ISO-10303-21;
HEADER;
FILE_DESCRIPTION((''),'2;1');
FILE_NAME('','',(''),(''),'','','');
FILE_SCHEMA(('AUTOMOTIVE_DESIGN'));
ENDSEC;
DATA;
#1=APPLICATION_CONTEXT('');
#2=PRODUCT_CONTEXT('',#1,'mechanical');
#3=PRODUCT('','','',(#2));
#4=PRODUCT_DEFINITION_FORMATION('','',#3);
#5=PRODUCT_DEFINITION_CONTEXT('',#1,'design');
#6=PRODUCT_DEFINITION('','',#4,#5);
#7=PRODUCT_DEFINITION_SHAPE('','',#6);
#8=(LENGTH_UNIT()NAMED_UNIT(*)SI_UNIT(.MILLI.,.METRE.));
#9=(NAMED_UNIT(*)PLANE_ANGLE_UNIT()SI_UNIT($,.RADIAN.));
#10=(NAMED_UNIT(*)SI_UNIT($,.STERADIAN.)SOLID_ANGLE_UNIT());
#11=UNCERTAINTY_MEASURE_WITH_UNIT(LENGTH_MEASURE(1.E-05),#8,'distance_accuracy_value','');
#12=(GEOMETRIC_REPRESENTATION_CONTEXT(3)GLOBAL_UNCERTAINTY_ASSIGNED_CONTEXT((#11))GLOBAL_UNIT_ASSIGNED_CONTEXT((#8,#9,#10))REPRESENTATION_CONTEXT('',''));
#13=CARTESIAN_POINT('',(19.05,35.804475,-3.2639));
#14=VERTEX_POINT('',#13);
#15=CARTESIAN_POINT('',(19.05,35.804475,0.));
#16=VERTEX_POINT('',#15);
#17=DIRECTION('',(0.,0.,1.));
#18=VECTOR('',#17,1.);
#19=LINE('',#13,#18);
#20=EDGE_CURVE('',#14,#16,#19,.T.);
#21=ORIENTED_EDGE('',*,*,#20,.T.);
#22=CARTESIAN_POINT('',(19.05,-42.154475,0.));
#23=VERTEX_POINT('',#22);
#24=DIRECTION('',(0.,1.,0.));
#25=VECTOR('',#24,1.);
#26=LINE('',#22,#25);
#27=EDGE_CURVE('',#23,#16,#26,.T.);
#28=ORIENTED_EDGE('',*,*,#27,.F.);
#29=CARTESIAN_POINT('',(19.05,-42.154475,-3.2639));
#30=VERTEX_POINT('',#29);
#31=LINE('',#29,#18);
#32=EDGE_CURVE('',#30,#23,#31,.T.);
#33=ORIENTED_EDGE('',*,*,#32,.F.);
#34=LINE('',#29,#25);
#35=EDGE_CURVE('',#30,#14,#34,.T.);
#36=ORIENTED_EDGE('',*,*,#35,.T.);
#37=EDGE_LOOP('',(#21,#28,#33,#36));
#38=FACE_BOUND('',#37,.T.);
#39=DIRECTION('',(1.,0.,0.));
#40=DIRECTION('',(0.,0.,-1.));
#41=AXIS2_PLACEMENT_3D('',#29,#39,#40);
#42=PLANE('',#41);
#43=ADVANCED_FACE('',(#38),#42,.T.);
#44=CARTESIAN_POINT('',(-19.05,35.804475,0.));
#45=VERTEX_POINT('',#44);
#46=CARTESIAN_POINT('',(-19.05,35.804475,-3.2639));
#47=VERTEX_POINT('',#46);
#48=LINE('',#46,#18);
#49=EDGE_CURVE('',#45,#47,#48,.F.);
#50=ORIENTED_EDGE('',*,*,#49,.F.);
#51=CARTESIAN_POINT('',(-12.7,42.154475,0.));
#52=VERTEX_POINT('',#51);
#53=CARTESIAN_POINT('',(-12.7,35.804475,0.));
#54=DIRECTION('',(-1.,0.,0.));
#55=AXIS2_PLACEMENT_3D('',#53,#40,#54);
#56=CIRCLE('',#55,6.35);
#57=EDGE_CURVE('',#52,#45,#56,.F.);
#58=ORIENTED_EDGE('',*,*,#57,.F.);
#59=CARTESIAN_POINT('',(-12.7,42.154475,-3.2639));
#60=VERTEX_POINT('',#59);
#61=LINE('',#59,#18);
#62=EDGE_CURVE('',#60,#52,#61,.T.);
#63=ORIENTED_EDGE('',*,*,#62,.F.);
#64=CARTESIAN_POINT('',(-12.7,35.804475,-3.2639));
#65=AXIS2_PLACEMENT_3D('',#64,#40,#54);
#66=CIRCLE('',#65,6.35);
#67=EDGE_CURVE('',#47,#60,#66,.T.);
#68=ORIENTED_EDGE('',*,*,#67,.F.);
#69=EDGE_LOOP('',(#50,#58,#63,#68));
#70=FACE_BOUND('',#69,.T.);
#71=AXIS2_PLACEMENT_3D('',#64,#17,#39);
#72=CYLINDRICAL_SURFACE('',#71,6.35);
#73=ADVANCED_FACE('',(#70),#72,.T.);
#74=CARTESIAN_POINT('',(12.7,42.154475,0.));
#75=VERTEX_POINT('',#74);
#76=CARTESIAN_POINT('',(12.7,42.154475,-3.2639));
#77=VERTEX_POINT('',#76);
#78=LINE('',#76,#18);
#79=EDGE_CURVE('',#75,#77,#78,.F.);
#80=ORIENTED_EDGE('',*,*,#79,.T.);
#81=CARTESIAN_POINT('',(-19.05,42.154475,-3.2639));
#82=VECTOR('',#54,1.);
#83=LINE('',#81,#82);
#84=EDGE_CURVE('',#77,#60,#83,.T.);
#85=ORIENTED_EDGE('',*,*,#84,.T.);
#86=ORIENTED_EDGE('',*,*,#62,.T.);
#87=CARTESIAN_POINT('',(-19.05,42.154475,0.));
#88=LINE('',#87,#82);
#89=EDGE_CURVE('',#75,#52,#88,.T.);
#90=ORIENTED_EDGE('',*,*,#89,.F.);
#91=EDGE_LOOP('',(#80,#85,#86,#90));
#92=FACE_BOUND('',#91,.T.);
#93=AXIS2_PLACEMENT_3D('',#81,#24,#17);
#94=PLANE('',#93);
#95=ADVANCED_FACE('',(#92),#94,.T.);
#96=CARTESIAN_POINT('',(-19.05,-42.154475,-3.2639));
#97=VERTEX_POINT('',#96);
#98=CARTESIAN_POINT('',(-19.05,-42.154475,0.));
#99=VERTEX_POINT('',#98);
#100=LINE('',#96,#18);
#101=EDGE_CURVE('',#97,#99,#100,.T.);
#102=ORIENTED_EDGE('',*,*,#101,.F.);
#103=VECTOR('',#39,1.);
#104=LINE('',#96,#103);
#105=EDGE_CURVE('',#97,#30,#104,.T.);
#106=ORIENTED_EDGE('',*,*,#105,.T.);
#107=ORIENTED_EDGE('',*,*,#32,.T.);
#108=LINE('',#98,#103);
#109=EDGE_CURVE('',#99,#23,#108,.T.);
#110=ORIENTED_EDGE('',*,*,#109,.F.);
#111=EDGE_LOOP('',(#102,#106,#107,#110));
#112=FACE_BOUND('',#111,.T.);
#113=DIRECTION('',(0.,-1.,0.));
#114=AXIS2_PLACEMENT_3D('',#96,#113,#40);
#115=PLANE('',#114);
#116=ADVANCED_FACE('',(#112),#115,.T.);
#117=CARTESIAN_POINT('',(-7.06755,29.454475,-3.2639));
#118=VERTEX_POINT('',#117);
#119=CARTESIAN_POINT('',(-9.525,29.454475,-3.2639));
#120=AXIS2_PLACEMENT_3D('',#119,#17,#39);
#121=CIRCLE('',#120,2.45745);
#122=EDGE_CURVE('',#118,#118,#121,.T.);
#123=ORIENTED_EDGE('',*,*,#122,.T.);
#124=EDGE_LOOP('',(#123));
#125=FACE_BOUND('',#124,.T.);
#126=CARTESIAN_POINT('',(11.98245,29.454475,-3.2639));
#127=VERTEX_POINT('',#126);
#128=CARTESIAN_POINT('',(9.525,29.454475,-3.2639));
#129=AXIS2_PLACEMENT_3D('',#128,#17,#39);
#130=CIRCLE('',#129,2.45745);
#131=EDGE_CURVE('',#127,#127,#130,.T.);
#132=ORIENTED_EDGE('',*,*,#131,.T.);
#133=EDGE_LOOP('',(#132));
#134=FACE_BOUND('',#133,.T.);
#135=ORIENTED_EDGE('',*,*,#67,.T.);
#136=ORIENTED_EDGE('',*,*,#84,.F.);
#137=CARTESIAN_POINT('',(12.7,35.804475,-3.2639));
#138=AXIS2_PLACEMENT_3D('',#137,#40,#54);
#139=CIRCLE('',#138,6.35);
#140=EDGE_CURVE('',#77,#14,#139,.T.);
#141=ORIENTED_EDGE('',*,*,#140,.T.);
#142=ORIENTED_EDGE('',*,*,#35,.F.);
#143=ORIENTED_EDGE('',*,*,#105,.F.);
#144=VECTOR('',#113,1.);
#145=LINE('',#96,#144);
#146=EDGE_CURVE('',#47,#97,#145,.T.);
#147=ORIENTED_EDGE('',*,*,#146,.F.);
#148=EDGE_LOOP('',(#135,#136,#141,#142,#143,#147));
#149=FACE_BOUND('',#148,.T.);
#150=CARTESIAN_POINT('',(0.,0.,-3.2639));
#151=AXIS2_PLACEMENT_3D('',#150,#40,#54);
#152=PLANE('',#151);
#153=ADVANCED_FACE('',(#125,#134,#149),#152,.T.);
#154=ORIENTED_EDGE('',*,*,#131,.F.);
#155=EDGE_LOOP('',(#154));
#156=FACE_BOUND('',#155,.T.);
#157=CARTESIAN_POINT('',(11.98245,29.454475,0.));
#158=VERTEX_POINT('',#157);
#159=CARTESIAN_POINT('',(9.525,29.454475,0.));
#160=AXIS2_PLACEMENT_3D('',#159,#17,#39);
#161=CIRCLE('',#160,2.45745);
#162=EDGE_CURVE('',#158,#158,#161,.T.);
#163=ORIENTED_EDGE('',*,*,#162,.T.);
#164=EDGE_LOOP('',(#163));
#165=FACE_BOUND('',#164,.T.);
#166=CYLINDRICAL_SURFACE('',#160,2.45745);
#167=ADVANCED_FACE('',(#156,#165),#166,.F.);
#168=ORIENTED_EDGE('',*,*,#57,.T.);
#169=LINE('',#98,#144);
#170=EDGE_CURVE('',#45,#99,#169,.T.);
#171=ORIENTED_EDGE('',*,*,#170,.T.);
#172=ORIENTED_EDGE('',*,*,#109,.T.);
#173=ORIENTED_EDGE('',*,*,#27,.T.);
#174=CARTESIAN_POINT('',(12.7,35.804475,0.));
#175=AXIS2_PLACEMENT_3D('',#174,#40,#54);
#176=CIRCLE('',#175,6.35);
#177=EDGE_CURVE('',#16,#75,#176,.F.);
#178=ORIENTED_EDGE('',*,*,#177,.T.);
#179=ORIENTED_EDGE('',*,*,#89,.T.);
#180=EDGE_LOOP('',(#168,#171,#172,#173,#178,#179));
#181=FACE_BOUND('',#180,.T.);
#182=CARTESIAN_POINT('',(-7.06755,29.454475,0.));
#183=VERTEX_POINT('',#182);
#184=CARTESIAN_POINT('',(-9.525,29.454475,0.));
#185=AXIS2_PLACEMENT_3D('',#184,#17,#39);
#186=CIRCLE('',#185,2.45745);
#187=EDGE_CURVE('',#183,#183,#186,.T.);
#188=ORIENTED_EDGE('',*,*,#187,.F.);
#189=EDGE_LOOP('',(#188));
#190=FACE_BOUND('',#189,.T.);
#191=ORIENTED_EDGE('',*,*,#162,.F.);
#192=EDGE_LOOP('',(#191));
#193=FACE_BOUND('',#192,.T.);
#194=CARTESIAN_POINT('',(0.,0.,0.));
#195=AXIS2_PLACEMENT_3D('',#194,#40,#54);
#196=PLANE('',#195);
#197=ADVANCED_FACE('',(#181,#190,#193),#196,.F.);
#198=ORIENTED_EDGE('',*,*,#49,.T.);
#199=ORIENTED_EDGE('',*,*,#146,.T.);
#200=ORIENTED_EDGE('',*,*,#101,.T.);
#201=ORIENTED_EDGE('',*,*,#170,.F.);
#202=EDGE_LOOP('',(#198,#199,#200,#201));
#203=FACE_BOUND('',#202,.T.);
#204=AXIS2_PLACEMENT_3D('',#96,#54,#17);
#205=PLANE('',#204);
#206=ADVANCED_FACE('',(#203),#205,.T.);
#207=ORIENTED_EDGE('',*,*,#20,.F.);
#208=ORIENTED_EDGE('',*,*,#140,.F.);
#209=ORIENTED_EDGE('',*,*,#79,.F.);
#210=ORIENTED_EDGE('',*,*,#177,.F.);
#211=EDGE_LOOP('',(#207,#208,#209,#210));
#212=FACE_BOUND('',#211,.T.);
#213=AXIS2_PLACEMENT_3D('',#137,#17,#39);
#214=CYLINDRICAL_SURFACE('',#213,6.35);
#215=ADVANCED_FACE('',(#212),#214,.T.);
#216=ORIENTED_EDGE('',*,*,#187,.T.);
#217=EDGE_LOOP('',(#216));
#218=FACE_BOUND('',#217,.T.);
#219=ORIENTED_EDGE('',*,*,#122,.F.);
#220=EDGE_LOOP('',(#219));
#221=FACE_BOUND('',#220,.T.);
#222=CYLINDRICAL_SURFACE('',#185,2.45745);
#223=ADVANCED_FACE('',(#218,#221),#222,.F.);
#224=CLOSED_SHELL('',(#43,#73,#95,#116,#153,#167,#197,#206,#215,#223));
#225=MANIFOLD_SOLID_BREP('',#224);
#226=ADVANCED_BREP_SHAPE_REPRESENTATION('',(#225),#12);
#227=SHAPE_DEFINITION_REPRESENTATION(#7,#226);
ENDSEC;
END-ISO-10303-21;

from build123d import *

# Parameters (mm, degrees)
SKETCH1_W                    = 38.1
SKETCH1_H                    = 84.30895
BASE_FLANGE1_DEPTH           = 3.2639
F_10_0_1935_DIAMETER_HOLE1_D = 4.9149
FILLET1_R                    = 6.35


# Sheet-metal steps are written as plain solids
with BuildPart() as part:
    # Sketch1 → Base-Flange1 (new body)
    with BuildSketch(Plane.XY):
        Rectangle(SKETCH1_W, SKETCH1_H)
    extrude(amount=-BASE_FLANGE1_DEPTH)

    # #10 (0.1935) Diameter Hole1 (through all)
    with Locations(Plane.XY):
        with Locations((-9.525, 29.454475), (9.525, 29.454475)):
            Hole(F_10_0_1935_DIAMETER_HOLE1_D / 2)

    # Fillet1
    fillet1_edges = [part.edges().sort_by_distance(p)[0] for p in [
        (-19.05, 42.154475, -1.63195),
        (19.05, 42.154475, -1.63195),
    ]]
    fillet(fillet1_edges, radius=FILLET1_R)


solid = part.part
